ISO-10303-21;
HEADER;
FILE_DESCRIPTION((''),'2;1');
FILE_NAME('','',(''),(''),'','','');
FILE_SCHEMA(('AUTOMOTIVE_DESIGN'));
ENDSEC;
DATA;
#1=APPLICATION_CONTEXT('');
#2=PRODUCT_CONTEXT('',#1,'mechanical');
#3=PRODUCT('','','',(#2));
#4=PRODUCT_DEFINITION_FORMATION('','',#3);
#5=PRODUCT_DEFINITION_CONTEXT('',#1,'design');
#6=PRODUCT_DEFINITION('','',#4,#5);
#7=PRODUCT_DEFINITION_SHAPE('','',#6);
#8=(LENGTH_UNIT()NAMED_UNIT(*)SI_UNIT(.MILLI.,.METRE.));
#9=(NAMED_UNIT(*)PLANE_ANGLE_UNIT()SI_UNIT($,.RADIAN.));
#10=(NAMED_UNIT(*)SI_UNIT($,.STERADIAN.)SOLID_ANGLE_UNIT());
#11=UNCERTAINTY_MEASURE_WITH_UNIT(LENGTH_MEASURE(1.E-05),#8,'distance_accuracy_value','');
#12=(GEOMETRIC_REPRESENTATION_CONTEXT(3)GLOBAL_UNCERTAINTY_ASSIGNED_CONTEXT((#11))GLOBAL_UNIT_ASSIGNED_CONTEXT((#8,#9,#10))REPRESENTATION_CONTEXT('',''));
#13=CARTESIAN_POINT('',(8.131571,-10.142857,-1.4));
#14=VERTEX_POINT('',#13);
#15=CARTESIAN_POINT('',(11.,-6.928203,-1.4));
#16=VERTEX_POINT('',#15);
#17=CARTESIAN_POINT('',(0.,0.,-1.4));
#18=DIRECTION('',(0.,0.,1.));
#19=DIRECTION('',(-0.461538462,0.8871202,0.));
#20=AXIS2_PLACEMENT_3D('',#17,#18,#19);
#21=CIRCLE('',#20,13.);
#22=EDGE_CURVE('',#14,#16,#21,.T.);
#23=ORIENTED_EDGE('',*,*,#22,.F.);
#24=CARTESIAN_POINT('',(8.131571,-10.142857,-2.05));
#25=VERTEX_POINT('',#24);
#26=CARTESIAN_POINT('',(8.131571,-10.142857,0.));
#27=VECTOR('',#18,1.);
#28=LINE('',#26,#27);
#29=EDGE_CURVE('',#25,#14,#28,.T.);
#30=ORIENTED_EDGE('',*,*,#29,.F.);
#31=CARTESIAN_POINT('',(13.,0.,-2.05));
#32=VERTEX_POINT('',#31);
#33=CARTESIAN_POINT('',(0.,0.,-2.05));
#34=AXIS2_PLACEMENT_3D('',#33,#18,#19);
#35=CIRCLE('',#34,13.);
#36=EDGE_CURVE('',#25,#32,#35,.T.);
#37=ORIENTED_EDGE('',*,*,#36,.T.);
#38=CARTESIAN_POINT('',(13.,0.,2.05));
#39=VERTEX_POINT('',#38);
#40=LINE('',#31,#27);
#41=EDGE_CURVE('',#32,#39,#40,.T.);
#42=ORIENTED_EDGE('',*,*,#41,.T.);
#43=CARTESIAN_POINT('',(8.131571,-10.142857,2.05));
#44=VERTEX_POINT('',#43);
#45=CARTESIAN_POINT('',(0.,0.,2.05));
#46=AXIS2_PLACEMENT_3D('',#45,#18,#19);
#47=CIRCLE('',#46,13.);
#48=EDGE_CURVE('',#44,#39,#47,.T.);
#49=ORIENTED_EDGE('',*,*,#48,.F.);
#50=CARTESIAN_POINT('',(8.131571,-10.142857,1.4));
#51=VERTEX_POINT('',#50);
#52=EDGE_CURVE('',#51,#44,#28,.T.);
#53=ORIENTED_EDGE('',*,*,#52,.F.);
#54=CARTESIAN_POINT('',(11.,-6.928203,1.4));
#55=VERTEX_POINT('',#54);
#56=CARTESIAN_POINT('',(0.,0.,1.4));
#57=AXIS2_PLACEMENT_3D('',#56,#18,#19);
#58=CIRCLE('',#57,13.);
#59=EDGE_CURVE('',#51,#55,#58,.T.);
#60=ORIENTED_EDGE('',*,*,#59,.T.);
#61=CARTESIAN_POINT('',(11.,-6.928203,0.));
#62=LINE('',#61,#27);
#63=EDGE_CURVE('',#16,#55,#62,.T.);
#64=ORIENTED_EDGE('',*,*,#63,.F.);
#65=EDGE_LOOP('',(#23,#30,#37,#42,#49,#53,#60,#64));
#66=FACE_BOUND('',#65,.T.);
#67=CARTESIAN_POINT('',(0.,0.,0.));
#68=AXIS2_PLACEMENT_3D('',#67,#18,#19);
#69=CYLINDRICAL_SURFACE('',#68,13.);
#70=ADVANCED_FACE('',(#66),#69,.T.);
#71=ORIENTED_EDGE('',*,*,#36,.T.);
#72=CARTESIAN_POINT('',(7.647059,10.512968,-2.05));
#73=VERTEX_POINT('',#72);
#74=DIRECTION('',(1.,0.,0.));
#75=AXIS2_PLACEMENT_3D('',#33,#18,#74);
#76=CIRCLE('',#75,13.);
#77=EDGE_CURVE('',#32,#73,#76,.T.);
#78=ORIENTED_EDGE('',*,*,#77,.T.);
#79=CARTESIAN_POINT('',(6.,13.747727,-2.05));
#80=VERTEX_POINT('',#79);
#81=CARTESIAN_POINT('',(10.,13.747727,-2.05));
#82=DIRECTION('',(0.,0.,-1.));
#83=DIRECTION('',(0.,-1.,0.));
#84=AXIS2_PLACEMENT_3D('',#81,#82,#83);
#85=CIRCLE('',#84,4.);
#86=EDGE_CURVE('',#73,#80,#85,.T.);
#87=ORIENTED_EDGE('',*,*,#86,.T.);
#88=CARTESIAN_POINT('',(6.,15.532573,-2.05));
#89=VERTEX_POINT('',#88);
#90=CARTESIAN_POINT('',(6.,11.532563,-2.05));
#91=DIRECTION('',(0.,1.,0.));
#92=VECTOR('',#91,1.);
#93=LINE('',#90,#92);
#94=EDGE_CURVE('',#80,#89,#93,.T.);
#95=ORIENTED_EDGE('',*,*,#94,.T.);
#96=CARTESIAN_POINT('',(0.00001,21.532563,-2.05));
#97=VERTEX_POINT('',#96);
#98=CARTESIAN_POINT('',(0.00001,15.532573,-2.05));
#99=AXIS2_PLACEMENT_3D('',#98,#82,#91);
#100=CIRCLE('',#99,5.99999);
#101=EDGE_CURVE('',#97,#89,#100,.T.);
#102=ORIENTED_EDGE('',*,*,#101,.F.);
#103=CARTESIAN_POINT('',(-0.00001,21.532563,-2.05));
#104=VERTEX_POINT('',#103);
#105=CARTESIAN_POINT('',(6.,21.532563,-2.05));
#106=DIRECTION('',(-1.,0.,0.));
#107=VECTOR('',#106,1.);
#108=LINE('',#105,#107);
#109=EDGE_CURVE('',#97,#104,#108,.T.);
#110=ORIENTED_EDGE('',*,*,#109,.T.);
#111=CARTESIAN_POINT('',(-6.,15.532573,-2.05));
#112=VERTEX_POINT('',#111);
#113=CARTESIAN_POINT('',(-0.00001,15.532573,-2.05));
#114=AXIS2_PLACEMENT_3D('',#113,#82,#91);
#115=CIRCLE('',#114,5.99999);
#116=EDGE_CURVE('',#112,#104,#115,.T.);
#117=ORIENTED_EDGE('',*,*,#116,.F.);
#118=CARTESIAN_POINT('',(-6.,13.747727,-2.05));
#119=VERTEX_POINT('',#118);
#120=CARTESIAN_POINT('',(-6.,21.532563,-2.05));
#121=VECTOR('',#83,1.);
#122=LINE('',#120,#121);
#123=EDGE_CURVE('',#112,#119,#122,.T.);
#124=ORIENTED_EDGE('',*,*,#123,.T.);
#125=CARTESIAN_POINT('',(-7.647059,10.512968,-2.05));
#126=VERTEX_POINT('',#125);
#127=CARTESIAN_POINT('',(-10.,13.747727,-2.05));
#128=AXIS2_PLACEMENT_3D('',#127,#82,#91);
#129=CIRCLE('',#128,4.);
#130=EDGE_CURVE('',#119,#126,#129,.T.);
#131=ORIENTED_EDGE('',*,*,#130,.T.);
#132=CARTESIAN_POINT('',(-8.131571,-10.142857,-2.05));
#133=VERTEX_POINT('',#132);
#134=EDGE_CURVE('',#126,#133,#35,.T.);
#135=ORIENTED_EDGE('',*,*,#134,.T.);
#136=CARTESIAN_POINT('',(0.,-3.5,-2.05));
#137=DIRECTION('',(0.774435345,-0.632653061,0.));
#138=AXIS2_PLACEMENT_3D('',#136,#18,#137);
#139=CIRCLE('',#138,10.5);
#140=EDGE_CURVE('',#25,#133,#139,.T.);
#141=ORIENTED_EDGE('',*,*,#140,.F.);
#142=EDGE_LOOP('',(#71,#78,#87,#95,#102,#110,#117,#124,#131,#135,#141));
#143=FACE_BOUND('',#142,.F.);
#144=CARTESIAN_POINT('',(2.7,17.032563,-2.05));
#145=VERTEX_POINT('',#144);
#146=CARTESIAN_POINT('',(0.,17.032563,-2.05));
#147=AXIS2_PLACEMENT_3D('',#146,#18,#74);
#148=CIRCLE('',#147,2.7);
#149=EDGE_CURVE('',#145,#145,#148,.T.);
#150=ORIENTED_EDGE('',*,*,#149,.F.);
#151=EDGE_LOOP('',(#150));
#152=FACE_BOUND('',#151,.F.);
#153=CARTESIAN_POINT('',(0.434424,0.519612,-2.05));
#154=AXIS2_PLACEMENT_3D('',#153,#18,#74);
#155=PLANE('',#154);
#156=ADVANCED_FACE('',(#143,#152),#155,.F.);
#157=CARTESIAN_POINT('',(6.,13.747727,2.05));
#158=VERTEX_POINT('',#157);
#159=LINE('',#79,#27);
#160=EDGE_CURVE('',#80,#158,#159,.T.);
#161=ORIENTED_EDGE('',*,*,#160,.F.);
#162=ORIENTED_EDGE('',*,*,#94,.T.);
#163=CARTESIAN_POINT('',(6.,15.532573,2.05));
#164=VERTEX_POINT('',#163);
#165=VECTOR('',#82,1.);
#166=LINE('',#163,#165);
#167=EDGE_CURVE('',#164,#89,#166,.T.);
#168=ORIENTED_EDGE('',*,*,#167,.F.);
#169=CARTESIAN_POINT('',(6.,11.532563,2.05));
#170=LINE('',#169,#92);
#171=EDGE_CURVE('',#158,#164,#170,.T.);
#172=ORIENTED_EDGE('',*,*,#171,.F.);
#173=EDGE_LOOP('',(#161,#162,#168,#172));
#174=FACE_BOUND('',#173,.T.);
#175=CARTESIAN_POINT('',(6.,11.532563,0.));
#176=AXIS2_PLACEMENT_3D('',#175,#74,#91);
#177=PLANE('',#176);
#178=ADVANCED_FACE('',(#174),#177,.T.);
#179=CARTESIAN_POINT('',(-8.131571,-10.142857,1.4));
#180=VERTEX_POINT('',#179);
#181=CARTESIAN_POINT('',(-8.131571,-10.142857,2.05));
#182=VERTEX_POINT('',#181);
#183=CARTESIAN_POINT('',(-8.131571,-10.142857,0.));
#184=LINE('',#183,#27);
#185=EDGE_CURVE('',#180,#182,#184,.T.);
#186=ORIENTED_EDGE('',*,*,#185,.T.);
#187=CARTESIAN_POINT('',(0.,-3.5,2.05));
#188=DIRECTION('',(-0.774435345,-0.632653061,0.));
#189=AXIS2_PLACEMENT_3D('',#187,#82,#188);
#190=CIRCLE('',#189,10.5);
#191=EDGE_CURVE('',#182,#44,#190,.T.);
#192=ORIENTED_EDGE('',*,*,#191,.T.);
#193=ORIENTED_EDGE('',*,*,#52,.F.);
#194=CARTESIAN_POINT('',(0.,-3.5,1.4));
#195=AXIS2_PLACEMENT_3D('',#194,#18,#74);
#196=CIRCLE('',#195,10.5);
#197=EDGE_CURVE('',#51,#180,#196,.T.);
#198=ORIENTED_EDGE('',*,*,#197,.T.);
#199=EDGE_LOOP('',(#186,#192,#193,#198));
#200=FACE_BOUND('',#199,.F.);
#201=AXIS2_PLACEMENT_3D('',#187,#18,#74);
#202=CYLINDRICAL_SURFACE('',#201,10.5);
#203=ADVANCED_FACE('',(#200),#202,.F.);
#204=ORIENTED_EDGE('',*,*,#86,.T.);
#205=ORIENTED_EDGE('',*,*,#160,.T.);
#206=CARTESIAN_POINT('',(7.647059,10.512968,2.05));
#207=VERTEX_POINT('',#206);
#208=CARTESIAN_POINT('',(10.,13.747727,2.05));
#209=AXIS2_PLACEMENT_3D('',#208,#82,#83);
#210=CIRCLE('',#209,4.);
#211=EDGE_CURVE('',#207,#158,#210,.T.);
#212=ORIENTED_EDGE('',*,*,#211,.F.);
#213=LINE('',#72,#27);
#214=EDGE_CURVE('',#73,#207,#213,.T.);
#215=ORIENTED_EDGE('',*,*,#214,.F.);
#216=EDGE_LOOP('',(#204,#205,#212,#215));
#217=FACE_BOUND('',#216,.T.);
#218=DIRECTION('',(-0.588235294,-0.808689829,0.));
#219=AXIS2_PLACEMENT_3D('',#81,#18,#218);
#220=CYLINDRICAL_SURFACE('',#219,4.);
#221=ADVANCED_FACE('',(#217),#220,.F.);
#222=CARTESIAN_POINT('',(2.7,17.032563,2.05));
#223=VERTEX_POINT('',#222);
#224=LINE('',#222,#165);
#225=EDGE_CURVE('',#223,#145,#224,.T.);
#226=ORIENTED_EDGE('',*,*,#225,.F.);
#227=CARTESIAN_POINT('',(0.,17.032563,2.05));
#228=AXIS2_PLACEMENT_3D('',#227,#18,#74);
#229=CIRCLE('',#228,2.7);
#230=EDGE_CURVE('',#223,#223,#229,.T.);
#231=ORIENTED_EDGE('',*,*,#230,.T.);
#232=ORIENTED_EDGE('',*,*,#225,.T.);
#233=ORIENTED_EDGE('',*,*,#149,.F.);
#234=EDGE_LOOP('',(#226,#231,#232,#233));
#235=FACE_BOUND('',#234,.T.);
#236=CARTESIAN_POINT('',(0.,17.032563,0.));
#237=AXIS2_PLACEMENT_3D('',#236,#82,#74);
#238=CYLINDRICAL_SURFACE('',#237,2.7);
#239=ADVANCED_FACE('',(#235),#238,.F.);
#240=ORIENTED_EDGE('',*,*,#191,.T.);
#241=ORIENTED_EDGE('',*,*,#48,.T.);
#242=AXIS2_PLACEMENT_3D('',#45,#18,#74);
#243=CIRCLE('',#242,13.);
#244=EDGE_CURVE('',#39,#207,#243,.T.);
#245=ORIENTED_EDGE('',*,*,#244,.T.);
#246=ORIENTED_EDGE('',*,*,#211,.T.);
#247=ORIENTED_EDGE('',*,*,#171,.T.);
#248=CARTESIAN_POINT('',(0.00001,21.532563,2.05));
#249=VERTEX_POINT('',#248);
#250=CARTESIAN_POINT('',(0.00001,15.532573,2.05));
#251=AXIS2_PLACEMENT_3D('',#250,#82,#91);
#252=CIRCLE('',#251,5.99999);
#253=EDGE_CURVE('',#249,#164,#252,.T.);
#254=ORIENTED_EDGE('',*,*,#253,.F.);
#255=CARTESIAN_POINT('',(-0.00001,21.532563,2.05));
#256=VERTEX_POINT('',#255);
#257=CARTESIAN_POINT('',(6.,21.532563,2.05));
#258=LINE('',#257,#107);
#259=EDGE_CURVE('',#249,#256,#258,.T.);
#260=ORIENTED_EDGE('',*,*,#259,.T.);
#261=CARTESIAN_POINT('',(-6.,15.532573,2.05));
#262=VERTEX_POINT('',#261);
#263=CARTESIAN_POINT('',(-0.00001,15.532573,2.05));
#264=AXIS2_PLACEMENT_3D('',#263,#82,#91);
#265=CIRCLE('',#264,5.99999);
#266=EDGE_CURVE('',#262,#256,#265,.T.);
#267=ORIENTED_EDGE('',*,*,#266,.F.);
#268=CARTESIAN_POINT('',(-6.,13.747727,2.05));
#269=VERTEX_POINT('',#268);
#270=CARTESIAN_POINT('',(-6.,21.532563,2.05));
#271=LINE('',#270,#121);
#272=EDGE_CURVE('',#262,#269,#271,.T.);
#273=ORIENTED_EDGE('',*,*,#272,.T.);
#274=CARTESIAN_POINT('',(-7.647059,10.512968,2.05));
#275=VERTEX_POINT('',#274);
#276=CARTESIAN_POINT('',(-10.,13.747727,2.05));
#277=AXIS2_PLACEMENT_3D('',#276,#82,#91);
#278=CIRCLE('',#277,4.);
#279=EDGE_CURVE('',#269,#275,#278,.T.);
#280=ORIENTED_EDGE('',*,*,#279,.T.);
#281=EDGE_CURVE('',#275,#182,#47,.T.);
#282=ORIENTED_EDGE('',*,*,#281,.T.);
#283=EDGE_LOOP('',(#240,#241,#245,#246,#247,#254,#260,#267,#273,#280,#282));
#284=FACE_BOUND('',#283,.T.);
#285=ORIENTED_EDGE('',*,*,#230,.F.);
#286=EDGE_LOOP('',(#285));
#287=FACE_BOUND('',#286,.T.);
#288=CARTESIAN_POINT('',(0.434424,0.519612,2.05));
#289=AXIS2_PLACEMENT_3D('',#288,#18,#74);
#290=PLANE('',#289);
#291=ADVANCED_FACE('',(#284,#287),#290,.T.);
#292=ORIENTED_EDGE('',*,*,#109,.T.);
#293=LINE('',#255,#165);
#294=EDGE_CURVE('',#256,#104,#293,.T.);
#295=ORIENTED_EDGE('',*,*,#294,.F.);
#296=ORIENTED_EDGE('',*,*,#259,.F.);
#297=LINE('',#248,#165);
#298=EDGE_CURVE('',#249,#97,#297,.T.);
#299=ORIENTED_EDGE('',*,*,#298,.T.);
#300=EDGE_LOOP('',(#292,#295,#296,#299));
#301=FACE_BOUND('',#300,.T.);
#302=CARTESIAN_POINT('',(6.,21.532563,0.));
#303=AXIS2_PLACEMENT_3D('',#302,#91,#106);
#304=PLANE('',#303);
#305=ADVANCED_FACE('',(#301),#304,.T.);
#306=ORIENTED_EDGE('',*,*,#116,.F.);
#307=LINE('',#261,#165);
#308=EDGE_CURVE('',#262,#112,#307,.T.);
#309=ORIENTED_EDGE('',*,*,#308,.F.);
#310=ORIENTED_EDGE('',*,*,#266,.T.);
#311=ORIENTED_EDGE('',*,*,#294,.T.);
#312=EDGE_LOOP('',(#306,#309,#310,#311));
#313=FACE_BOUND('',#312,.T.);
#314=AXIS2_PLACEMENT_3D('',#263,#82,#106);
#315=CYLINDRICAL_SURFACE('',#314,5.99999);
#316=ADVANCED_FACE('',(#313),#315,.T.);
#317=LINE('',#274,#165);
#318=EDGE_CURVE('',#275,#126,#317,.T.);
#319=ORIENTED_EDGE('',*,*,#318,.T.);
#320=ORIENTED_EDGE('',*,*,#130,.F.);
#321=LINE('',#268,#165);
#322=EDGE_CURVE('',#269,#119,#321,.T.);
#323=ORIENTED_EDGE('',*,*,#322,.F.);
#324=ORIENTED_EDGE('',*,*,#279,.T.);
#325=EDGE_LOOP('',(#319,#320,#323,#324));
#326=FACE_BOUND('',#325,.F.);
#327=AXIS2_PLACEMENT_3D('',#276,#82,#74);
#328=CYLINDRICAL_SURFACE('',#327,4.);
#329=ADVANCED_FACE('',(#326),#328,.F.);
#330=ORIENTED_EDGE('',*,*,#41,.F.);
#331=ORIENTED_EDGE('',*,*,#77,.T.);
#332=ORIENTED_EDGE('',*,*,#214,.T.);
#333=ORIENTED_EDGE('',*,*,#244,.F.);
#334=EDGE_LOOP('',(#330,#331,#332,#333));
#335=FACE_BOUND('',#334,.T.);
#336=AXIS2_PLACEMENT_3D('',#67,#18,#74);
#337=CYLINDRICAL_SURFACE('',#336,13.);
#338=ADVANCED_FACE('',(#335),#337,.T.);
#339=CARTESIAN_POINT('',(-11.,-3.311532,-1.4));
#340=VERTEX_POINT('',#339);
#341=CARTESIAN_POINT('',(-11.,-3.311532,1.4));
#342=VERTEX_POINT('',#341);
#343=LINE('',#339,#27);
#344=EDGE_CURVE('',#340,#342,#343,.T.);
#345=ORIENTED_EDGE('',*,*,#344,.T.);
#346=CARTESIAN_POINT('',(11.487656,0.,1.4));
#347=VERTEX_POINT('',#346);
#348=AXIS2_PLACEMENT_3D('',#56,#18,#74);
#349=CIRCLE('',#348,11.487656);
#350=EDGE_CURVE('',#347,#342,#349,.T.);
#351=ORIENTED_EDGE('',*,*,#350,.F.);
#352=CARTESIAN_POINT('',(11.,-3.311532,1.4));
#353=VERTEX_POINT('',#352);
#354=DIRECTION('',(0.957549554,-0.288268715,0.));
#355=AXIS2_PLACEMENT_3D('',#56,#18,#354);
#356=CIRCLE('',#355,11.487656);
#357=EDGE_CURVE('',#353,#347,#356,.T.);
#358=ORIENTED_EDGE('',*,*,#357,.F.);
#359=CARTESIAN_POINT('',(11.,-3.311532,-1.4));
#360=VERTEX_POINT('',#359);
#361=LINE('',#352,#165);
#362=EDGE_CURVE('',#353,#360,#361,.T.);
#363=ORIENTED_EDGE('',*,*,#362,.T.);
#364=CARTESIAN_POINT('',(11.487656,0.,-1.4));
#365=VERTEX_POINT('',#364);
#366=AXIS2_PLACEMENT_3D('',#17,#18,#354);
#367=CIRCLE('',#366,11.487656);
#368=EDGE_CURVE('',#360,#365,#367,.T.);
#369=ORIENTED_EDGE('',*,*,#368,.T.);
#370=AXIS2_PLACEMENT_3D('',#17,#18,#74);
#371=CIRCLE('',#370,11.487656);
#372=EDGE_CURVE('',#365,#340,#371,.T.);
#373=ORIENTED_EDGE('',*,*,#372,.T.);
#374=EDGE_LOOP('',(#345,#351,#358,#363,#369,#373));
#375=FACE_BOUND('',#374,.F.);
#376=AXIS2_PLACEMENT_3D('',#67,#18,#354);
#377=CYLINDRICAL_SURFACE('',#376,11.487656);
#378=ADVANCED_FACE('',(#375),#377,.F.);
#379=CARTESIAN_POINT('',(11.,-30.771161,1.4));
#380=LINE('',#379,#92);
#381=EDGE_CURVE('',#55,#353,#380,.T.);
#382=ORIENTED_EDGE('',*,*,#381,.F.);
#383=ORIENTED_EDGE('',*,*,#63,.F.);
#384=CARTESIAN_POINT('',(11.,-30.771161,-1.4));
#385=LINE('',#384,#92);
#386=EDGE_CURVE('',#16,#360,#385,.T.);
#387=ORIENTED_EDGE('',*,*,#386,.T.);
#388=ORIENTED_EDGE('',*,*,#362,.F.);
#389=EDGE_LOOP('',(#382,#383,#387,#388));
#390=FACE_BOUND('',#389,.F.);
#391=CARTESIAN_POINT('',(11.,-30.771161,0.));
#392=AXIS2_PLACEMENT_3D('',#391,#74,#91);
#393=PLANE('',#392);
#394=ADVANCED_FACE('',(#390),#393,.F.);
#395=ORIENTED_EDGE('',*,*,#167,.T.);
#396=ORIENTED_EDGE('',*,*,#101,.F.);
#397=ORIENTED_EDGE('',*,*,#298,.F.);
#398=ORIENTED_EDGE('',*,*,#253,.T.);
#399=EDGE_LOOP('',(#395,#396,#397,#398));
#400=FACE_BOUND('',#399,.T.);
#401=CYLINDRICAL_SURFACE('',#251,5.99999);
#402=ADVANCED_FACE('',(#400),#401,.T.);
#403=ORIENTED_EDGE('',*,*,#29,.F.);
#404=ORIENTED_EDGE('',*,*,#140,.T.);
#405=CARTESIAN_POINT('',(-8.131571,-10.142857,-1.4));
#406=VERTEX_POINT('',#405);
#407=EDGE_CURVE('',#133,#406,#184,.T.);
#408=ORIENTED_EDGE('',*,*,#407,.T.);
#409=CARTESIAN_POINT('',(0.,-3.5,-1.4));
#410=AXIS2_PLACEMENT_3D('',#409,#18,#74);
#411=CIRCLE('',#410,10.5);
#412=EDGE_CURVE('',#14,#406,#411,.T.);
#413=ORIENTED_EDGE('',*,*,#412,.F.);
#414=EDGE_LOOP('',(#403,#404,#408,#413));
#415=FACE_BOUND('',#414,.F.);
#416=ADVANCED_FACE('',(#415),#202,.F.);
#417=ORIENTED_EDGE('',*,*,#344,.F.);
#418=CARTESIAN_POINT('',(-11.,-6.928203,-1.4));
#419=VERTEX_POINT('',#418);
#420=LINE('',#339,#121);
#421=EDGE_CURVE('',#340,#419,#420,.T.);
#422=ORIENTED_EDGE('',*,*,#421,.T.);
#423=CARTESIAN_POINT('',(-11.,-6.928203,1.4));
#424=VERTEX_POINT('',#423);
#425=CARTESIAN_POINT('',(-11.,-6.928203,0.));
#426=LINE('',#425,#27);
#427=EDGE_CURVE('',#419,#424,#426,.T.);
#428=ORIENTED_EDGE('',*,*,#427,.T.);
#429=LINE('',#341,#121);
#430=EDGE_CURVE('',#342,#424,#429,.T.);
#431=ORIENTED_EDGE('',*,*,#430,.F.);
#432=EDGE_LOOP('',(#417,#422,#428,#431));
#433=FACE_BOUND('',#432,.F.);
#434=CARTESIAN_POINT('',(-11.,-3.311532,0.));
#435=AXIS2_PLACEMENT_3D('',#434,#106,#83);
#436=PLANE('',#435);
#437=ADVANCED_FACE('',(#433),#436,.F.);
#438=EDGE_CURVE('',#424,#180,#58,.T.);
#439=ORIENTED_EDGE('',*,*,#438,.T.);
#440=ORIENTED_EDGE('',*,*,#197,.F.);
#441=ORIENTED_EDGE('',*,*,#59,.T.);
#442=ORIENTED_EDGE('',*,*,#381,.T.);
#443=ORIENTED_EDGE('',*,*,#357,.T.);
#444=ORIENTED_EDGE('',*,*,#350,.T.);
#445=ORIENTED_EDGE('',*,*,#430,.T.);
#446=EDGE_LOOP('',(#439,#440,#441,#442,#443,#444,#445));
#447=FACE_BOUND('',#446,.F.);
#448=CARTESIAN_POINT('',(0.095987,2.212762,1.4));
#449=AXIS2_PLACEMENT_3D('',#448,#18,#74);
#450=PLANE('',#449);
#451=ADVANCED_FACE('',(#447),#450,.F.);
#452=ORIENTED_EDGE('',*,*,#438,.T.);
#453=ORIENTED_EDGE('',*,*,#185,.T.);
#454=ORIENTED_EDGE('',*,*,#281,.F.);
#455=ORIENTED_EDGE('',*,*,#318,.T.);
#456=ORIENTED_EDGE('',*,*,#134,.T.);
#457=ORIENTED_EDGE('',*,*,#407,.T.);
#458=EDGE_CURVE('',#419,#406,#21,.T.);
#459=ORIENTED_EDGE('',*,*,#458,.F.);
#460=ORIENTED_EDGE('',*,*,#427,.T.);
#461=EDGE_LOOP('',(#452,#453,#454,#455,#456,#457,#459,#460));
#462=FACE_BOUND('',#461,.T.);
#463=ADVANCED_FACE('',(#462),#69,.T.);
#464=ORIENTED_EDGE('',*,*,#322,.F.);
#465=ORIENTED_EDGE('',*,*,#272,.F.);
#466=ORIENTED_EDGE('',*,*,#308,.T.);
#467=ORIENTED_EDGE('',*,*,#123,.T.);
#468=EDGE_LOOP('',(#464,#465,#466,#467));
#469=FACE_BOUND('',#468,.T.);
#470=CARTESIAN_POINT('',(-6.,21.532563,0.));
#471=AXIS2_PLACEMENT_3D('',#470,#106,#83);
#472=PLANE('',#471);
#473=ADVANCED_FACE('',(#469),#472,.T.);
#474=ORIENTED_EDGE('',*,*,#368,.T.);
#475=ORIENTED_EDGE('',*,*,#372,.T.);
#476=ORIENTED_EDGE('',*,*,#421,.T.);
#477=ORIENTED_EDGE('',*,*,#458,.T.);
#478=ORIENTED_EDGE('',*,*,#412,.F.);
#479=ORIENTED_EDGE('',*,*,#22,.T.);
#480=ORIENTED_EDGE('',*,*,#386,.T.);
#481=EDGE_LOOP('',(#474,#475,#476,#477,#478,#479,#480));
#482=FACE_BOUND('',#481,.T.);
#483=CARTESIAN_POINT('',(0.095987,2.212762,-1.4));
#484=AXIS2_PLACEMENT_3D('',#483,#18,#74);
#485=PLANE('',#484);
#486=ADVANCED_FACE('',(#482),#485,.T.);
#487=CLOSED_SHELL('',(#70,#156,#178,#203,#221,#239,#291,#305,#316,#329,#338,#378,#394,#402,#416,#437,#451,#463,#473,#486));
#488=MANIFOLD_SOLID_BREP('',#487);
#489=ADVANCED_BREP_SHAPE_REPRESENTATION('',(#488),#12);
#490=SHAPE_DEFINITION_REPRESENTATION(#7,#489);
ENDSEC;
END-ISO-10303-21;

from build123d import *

# Parameters (mm, degrees)
F0_R     = 2.7
F1_DEPTH = 2.05
F2_R     = 5.99999
F3_R     = 4
F4_R     = 10.5
F5_DEPTH = 4.101
F7_DEPTH = 1.4


# Not quite as in the source:
# - a fillet or chamfer is up to 0.001 mm smaller than in the source, because OpenCascade refuses the exact size


with BuildPart() as f1:
    # F0 (on Top) → F1 (new body, symmetric)
    with BuildSketch(Plane.XY):
        with BuildLine():
            ThreePointArc((-6, 11.5325625947), (-6.7453687816, -11.1130553854), (13, 0))
            ThreePointArc((13, 0), (11.1130553854, 6.7453687816), (6, 11.5325625947))
            Line((6, 11.5325625947), (-6, 11.5325625947))
        make_face()
        with BuildLine():
            Line((-6, 11.5325625947), (6, 11.5325625947))
            ThreePointArc((6, 11.5325625947), (0, 13), (-6, 11.5325625947))
        make_face()
        with BuildLine():
            ThreePointArc((-6, 11.5325625947), (0, 13), (6, 11.5325625947))
            Line((6, 11.5325625947), (6, 21.5325625947))
            Line((6, 21.5325625947), (-6, 21.5325625947))
            Line((-6, 21.5325625947), (-6, 11.5325625947))
        make_face()
        with Locations((0, 17.0325625947)):
            Circle(F0_R, mode=Mode.SUBTRACT)
    extrude(amount=F1_DEPTH, both=True)

    # F2 (radius 6 in the source; OpenCascade refuses exactly that, so slightly less here)
    f2_edges = [f1.edges().sort_by_distance(p)[0] for p in [
        (-6, 21.532563, 0),
        (6, 21.532563, 0),
    ]]
    fillet(f2_edges, radius=F2_R)

    # F3
    f3_edges = [f1.edges().sort_by_distance(p)[0] for p in [
        (6, 11.532563, 0),
        (-6, 11.532563, 0),
    ]]
    fillet(f3_edges, radius=F3_R)

    # F4 (on face) → F5 (cut, through all)
    with BuildSketch(Plane.XY.offset(2.05)):
        with Locations((0, -3.5)):
            Circle(F4_R)
    extrude(amount=-F5_DEPTH, mode=Mode.SUBTRACT)

    # F6 (on Top) → F7 (cut, symmetric)
    with BuildSketch(Plane.XY):
        with BuildLine():
            ThreePointArc((11, -3.3115318698), (11.3650882253, -1.6736227042), (11.4876561284, 0))
            ThreePointArc((11.4876561284, 0), (-1.6736227042, 11.3650882253), (-11, -3.3115318698))
            Line((-11, -3.3115318698), (11, -3.3115318698))
        make_face()
        with BuildLine():
            Line((11, -3.3115318698), (-11, -3.3115318698))
            ThreePointArc((-11, -3.3115318698), (0, -11.4876561284), (11, -3.3115318698))
        make_face()
        with BuildLine():
            ThreePointArc((11, -3.3115318698), (0, -11.4876561284), (-11, -3.3115318698))
            Line((-11, -3.3115318698), (-11, -30.7711608721))
            Line((-11, -30.7711608721), (11, -30.7711608721))
            Line((11, -30.7711608721), (11, -3.3115318698))
        make_face()
    extrude(amount=F7_DEPTH, both=True, mode=Mode.SUBTRACT)


solid = f1.part
